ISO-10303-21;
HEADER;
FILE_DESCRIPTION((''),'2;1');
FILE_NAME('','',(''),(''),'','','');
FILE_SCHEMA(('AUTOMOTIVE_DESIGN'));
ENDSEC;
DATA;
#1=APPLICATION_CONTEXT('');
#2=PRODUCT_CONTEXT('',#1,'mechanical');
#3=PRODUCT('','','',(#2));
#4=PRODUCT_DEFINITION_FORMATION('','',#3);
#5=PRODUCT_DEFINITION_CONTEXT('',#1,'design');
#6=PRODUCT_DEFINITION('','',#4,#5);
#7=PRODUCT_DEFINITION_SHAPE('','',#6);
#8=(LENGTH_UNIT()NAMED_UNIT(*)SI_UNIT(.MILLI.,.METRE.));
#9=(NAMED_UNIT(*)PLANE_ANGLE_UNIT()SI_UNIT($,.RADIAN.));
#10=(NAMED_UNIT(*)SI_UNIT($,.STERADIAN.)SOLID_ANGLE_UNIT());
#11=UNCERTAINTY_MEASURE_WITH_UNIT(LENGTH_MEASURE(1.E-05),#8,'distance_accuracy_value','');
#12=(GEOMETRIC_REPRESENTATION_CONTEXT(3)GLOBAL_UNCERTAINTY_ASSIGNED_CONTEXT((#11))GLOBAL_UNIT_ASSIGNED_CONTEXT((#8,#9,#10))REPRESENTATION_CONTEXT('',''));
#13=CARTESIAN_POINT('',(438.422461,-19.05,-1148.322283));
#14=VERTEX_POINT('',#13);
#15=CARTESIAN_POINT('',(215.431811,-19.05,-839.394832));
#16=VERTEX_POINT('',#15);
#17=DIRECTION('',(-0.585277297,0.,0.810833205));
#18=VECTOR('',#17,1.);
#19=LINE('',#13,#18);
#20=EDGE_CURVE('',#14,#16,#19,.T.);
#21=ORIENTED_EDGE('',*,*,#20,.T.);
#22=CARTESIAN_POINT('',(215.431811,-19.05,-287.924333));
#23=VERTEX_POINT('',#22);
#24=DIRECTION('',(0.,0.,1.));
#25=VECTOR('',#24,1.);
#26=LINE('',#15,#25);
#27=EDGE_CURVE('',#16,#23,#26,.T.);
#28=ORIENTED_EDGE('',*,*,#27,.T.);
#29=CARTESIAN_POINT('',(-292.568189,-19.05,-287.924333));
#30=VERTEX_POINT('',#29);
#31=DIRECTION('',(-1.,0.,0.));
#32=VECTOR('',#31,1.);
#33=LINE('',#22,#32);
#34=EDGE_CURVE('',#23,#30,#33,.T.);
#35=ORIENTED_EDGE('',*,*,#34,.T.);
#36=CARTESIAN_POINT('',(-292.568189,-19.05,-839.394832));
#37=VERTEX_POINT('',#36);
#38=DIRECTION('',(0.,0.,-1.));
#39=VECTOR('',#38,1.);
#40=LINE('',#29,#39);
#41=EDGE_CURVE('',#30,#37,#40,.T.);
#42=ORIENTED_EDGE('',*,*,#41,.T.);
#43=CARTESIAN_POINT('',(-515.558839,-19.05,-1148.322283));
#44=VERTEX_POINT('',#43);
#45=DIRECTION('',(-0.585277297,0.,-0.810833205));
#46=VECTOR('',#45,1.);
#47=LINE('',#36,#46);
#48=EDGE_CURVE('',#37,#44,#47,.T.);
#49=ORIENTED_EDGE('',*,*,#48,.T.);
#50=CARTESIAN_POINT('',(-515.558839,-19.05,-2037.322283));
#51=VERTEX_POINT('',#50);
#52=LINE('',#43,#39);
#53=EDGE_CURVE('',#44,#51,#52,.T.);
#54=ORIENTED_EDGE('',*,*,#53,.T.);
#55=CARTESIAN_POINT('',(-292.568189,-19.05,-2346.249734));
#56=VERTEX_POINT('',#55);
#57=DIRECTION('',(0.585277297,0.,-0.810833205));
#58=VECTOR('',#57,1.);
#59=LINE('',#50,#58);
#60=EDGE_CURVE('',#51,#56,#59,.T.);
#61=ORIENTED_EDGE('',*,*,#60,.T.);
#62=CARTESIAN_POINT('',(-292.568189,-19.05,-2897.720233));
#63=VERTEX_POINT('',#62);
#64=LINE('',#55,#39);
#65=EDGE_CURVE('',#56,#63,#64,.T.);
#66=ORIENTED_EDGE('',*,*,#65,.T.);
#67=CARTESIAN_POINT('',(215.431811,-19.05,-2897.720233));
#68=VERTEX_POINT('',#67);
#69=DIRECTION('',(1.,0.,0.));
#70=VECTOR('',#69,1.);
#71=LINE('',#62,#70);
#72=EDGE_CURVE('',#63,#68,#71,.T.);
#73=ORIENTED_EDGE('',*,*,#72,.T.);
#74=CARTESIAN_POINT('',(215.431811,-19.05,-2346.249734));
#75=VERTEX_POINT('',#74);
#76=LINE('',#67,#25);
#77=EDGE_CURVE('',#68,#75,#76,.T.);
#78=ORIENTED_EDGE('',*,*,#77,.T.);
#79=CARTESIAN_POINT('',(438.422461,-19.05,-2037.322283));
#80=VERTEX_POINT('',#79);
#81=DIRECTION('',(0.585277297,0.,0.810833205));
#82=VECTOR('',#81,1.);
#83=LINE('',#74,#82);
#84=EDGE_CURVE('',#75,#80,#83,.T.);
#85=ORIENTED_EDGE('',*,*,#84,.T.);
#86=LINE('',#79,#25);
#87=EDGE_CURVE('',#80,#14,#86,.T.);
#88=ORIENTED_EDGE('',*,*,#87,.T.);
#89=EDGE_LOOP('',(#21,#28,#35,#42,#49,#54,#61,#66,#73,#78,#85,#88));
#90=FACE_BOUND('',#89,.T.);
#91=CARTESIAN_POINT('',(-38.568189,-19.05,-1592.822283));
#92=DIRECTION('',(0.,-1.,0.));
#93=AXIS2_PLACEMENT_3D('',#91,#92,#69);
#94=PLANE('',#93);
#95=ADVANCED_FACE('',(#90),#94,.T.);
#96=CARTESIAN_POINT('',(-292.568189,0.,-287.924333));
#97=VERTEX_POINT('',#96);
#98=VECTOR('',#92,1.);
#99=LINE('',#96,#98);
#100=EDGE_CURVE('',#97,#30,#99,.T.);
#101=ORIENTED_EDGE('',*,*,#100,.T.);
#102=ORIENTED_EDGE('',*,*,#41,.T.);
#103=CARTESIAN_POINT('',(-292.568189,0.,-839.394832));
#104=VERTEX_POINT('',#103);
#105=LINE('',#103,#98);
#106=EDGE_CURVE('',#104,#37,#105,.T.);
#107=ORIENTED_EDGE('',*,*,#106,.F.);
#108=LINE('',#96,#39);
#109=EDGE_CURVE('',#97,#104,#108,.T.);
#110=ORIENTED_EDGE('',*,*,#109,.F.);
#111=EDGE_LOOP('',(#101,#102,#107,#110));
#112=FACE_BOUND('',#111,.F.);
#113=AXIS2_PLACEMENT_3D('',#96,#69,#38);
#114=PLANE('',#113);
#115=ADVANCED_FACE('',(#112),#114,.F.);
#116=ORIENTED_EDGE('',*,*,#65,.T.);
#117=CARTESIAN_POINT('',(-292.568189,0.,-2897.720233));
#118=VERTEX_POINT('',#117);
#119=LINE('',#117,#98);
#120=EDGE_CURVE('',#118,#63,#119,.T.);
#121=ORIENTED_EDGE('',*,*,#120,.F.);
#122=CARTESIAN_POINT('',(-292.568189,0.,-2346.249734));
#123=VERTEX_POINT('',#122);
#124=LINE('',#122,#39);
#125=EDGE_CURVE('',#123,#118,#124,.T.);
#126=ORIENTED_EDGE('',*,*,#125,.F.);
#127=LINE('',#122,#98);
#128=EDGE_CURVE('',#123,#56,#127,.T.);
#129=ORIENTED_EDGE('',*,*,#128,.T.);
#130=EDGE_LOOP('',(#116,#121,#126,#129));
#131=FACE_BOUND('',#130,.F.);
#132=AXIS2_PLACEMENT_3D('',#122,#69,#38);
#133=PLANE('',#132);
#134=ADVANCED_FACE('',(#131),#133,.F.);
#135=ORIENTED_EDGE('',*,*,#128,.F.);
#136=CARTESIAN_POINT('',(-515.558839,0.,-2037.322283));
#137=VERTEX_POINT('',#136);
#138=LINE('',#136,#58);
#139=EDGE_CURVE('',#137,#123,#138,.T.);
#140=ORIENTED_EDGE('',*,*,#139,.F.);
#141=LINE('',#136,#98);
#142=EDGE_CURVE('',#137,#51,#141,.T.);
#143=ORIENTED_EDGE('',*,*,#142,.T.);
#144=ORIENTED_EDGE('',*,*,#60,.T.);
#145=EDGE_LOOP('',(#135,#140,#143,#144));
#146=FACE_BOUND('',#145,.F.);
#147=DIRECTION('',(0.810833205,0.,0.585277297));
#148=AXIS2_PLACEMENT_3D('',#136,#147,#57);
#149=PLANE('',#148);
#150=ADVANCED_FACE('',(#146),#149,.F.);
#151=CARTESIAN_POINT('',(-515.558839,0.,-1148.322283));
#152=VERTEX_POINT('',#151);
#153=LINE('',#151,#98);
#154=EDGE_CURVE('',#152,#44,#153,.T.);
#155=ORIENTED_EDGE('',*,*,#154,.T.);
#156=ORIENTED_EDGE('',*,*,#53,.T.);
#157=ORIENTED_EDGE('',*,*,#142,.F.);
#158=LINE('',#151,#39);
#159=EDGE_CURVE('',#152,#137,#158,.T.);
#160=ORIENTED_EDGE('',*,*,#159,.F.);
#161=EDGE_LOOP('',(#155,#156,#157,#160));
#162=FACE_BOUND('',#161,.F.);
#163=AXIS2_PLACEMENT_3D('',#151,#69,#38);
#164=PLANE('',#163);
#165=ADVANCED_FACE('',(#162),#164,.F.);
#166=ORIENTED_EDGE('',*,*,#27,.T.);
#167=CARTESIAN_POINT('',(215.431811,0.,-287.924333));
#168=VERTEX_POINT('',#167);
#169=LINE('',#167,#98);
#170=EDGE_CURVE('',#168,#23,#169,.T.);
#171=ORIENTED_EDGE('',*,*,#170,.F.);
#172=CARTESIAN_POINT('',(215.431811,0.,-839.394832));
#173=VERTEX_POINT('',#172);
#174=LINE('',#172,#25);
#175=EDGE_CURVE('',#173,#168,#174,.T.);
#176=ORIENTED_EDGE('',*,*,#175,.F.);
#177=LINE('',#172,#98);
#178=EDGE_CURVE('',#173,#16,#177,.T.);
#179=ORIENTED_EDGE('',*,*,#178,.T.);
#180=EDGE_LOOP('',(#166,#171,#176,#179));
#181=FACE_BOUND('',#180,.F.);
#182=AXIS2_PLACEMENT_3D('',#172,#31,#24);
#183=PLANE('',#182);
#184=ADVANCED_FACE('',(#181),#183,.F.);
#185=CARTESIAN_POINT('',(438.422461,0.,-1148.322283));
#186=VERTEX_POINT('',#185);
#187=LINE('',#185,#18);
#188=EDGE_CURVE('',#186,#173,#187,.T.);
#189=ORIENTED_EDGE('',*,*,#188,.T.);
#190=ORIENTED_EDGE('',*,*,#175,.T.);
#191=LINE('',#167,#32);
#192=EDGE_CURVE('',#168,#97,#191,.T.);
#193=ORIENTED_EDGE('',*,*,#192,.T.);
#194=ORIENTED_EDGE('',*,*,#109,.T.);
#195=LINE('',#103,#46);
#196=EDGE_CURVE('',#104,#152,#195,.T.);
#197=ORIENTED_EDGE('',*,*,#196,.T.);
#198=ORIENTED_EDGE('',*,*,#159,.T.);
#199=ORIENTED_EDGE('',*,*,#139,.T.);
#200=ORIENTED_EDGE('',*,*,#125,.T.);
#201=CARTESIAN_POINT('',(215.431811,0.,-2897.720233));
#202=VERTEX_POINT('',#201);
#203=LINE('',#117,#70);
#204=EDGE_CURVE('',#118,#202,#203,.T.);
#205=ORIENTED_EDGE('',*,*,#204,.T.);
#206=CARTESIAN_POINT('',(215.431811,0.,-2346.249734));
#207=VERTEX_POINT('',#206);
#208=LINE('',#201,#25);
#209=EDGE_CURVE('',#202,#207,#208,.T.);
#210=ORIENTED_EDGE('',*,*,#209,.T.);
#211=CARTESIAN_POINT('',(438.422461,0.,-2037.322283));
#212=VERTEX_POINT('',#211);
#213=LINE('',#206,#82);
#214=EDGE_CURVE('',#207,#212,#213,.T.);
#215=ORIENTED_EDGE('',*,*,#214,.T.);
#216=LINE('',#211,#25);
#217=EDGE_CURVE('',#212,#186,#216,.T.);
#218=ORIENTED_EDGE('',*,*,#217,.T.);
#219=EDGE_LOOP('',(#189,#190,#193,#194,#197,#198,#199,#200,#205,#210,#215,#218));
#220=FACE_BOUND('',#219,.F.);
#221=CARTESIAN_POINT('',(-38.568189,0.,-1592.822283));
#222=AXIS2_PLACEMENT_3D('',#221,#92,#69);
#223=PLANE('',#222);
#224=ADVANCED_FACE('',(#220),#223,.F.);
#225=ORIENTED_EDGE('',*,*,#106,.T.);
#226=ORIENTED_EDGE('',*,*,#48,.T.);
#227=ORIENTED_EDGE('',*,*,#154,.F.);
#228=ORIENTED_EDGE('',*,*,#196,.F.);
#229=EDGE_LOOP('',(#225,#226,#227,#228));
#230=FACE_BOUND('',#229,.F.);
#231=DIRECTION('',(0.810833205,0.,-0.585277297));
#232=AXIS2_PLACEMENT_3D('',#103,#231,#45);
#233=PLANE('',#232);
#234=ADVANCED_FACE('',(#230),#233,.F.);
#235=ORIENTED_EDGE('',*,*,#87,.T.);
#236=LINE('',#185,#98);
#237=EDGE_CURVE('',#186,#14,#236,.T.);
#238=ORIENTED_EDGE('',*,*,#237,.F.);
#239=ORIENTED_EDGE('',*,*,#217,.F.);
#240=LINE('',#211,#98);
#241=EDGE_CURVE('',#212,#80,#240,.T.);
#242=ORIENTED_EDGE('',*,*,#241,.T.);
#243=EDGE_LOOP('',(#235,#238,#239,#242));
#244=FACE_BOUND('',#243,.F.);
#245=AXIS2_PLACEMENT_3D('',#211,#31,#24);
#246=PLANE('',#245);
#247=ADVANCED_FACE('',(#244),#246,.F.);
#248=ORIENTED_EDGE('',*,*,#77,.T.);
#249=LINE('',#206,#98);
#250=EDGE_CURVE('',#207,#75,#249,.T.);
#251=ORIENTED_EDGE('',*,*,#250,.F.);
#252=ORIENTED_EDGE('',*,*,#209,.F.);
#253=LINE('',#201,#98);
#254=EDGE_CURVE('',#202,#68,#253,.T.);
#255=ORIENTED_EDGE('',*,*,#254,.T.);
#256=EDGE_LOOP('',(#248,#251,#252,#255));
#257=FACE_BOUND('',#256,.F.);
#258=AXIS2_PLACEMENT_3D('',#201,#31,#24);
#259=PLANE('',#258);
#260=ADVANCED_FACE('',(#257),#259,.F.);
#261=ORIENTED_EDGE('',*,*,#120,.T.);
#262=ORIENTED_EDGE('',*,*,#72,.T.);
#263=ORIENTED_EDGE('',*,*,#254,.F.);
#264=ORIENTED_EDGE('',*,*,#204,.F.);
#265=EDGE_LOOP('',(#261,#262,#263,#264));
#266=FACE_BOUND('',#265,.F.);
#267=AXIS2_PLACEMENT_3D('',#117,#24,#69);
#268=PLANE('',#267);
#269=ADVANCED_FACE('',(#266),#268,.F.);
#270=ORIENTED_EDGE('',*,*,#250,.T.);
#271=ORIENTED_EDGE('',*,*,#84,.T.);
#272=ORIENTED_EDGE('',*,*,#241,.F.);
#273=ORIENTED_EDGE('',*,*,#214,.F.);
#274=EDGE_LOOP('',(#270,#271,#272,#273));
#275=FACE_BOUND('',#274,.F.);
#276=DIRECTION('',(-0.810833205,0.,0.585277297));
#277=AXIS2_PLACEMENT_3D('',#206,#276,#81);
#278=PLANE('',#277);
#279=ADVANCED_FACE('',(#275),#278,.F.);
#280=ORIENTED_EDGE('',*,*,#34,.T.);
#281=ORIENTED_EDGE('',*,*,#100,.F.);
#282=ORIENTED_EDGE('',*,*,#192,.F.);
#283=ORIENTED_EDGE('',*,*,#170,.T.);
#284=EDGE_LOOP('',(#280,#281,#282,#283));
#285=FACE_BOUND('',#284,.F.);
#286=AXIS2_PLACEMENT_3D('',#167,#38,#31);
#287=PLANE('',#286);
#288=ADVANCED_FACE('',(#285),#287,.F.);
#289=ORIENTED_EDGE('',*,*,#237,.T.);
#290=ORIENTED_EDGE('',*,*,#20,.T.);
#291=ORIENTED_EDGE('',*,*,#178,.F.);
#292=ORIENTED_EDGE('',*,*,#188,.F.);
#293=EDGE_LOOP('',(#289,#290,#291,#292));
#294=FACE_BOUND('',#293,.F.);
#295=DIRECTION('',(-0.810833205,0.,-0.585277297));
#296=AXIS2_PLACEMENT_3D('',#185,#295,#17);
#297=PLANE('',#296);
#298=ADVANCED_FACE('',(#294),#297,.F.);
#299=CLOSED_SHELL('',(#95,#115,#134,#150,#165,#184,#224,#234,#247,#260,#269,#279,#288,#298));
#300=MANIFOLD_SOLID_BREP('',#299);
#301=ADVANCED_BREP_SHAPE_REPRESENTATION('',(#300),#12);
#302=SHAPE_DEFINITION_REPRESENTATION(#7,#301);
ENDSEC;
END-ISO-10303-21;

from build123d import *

# Parameters (mm, degrees)
F1_DEPTH = 19.05


# Not quite as in the source:
# - the program builds the solid bodies; features that only make, move or delete a surface that nothing else refers to are left out


with BuildPart() as f1:
    # F0 (on Front) → F1 (new body)
    with BuildSketch(Plane.XZ):
        Polygon((-515.5588388443, -1148.3222827911), (-515.5588388443, -2037.3222827911), (-292.5681887819, -2346.2497337966), (-292.5681887819, -2897.7202328353), (215.4318112181, -2897.7202328353), (215.4318112181, -2346.2497337966), (438.4224612806, -2037.3222827911), (438.4224612806, -1148.3222827911), (215.4318112181, -839.3948317857), (215.4318112181, -287.924332747), (-292.5681887819, -287.924332747), (-292.5681887819, -839.3948317857), align=None)
    extrude(amount=F1_DEPTH)


solid = f1.part
